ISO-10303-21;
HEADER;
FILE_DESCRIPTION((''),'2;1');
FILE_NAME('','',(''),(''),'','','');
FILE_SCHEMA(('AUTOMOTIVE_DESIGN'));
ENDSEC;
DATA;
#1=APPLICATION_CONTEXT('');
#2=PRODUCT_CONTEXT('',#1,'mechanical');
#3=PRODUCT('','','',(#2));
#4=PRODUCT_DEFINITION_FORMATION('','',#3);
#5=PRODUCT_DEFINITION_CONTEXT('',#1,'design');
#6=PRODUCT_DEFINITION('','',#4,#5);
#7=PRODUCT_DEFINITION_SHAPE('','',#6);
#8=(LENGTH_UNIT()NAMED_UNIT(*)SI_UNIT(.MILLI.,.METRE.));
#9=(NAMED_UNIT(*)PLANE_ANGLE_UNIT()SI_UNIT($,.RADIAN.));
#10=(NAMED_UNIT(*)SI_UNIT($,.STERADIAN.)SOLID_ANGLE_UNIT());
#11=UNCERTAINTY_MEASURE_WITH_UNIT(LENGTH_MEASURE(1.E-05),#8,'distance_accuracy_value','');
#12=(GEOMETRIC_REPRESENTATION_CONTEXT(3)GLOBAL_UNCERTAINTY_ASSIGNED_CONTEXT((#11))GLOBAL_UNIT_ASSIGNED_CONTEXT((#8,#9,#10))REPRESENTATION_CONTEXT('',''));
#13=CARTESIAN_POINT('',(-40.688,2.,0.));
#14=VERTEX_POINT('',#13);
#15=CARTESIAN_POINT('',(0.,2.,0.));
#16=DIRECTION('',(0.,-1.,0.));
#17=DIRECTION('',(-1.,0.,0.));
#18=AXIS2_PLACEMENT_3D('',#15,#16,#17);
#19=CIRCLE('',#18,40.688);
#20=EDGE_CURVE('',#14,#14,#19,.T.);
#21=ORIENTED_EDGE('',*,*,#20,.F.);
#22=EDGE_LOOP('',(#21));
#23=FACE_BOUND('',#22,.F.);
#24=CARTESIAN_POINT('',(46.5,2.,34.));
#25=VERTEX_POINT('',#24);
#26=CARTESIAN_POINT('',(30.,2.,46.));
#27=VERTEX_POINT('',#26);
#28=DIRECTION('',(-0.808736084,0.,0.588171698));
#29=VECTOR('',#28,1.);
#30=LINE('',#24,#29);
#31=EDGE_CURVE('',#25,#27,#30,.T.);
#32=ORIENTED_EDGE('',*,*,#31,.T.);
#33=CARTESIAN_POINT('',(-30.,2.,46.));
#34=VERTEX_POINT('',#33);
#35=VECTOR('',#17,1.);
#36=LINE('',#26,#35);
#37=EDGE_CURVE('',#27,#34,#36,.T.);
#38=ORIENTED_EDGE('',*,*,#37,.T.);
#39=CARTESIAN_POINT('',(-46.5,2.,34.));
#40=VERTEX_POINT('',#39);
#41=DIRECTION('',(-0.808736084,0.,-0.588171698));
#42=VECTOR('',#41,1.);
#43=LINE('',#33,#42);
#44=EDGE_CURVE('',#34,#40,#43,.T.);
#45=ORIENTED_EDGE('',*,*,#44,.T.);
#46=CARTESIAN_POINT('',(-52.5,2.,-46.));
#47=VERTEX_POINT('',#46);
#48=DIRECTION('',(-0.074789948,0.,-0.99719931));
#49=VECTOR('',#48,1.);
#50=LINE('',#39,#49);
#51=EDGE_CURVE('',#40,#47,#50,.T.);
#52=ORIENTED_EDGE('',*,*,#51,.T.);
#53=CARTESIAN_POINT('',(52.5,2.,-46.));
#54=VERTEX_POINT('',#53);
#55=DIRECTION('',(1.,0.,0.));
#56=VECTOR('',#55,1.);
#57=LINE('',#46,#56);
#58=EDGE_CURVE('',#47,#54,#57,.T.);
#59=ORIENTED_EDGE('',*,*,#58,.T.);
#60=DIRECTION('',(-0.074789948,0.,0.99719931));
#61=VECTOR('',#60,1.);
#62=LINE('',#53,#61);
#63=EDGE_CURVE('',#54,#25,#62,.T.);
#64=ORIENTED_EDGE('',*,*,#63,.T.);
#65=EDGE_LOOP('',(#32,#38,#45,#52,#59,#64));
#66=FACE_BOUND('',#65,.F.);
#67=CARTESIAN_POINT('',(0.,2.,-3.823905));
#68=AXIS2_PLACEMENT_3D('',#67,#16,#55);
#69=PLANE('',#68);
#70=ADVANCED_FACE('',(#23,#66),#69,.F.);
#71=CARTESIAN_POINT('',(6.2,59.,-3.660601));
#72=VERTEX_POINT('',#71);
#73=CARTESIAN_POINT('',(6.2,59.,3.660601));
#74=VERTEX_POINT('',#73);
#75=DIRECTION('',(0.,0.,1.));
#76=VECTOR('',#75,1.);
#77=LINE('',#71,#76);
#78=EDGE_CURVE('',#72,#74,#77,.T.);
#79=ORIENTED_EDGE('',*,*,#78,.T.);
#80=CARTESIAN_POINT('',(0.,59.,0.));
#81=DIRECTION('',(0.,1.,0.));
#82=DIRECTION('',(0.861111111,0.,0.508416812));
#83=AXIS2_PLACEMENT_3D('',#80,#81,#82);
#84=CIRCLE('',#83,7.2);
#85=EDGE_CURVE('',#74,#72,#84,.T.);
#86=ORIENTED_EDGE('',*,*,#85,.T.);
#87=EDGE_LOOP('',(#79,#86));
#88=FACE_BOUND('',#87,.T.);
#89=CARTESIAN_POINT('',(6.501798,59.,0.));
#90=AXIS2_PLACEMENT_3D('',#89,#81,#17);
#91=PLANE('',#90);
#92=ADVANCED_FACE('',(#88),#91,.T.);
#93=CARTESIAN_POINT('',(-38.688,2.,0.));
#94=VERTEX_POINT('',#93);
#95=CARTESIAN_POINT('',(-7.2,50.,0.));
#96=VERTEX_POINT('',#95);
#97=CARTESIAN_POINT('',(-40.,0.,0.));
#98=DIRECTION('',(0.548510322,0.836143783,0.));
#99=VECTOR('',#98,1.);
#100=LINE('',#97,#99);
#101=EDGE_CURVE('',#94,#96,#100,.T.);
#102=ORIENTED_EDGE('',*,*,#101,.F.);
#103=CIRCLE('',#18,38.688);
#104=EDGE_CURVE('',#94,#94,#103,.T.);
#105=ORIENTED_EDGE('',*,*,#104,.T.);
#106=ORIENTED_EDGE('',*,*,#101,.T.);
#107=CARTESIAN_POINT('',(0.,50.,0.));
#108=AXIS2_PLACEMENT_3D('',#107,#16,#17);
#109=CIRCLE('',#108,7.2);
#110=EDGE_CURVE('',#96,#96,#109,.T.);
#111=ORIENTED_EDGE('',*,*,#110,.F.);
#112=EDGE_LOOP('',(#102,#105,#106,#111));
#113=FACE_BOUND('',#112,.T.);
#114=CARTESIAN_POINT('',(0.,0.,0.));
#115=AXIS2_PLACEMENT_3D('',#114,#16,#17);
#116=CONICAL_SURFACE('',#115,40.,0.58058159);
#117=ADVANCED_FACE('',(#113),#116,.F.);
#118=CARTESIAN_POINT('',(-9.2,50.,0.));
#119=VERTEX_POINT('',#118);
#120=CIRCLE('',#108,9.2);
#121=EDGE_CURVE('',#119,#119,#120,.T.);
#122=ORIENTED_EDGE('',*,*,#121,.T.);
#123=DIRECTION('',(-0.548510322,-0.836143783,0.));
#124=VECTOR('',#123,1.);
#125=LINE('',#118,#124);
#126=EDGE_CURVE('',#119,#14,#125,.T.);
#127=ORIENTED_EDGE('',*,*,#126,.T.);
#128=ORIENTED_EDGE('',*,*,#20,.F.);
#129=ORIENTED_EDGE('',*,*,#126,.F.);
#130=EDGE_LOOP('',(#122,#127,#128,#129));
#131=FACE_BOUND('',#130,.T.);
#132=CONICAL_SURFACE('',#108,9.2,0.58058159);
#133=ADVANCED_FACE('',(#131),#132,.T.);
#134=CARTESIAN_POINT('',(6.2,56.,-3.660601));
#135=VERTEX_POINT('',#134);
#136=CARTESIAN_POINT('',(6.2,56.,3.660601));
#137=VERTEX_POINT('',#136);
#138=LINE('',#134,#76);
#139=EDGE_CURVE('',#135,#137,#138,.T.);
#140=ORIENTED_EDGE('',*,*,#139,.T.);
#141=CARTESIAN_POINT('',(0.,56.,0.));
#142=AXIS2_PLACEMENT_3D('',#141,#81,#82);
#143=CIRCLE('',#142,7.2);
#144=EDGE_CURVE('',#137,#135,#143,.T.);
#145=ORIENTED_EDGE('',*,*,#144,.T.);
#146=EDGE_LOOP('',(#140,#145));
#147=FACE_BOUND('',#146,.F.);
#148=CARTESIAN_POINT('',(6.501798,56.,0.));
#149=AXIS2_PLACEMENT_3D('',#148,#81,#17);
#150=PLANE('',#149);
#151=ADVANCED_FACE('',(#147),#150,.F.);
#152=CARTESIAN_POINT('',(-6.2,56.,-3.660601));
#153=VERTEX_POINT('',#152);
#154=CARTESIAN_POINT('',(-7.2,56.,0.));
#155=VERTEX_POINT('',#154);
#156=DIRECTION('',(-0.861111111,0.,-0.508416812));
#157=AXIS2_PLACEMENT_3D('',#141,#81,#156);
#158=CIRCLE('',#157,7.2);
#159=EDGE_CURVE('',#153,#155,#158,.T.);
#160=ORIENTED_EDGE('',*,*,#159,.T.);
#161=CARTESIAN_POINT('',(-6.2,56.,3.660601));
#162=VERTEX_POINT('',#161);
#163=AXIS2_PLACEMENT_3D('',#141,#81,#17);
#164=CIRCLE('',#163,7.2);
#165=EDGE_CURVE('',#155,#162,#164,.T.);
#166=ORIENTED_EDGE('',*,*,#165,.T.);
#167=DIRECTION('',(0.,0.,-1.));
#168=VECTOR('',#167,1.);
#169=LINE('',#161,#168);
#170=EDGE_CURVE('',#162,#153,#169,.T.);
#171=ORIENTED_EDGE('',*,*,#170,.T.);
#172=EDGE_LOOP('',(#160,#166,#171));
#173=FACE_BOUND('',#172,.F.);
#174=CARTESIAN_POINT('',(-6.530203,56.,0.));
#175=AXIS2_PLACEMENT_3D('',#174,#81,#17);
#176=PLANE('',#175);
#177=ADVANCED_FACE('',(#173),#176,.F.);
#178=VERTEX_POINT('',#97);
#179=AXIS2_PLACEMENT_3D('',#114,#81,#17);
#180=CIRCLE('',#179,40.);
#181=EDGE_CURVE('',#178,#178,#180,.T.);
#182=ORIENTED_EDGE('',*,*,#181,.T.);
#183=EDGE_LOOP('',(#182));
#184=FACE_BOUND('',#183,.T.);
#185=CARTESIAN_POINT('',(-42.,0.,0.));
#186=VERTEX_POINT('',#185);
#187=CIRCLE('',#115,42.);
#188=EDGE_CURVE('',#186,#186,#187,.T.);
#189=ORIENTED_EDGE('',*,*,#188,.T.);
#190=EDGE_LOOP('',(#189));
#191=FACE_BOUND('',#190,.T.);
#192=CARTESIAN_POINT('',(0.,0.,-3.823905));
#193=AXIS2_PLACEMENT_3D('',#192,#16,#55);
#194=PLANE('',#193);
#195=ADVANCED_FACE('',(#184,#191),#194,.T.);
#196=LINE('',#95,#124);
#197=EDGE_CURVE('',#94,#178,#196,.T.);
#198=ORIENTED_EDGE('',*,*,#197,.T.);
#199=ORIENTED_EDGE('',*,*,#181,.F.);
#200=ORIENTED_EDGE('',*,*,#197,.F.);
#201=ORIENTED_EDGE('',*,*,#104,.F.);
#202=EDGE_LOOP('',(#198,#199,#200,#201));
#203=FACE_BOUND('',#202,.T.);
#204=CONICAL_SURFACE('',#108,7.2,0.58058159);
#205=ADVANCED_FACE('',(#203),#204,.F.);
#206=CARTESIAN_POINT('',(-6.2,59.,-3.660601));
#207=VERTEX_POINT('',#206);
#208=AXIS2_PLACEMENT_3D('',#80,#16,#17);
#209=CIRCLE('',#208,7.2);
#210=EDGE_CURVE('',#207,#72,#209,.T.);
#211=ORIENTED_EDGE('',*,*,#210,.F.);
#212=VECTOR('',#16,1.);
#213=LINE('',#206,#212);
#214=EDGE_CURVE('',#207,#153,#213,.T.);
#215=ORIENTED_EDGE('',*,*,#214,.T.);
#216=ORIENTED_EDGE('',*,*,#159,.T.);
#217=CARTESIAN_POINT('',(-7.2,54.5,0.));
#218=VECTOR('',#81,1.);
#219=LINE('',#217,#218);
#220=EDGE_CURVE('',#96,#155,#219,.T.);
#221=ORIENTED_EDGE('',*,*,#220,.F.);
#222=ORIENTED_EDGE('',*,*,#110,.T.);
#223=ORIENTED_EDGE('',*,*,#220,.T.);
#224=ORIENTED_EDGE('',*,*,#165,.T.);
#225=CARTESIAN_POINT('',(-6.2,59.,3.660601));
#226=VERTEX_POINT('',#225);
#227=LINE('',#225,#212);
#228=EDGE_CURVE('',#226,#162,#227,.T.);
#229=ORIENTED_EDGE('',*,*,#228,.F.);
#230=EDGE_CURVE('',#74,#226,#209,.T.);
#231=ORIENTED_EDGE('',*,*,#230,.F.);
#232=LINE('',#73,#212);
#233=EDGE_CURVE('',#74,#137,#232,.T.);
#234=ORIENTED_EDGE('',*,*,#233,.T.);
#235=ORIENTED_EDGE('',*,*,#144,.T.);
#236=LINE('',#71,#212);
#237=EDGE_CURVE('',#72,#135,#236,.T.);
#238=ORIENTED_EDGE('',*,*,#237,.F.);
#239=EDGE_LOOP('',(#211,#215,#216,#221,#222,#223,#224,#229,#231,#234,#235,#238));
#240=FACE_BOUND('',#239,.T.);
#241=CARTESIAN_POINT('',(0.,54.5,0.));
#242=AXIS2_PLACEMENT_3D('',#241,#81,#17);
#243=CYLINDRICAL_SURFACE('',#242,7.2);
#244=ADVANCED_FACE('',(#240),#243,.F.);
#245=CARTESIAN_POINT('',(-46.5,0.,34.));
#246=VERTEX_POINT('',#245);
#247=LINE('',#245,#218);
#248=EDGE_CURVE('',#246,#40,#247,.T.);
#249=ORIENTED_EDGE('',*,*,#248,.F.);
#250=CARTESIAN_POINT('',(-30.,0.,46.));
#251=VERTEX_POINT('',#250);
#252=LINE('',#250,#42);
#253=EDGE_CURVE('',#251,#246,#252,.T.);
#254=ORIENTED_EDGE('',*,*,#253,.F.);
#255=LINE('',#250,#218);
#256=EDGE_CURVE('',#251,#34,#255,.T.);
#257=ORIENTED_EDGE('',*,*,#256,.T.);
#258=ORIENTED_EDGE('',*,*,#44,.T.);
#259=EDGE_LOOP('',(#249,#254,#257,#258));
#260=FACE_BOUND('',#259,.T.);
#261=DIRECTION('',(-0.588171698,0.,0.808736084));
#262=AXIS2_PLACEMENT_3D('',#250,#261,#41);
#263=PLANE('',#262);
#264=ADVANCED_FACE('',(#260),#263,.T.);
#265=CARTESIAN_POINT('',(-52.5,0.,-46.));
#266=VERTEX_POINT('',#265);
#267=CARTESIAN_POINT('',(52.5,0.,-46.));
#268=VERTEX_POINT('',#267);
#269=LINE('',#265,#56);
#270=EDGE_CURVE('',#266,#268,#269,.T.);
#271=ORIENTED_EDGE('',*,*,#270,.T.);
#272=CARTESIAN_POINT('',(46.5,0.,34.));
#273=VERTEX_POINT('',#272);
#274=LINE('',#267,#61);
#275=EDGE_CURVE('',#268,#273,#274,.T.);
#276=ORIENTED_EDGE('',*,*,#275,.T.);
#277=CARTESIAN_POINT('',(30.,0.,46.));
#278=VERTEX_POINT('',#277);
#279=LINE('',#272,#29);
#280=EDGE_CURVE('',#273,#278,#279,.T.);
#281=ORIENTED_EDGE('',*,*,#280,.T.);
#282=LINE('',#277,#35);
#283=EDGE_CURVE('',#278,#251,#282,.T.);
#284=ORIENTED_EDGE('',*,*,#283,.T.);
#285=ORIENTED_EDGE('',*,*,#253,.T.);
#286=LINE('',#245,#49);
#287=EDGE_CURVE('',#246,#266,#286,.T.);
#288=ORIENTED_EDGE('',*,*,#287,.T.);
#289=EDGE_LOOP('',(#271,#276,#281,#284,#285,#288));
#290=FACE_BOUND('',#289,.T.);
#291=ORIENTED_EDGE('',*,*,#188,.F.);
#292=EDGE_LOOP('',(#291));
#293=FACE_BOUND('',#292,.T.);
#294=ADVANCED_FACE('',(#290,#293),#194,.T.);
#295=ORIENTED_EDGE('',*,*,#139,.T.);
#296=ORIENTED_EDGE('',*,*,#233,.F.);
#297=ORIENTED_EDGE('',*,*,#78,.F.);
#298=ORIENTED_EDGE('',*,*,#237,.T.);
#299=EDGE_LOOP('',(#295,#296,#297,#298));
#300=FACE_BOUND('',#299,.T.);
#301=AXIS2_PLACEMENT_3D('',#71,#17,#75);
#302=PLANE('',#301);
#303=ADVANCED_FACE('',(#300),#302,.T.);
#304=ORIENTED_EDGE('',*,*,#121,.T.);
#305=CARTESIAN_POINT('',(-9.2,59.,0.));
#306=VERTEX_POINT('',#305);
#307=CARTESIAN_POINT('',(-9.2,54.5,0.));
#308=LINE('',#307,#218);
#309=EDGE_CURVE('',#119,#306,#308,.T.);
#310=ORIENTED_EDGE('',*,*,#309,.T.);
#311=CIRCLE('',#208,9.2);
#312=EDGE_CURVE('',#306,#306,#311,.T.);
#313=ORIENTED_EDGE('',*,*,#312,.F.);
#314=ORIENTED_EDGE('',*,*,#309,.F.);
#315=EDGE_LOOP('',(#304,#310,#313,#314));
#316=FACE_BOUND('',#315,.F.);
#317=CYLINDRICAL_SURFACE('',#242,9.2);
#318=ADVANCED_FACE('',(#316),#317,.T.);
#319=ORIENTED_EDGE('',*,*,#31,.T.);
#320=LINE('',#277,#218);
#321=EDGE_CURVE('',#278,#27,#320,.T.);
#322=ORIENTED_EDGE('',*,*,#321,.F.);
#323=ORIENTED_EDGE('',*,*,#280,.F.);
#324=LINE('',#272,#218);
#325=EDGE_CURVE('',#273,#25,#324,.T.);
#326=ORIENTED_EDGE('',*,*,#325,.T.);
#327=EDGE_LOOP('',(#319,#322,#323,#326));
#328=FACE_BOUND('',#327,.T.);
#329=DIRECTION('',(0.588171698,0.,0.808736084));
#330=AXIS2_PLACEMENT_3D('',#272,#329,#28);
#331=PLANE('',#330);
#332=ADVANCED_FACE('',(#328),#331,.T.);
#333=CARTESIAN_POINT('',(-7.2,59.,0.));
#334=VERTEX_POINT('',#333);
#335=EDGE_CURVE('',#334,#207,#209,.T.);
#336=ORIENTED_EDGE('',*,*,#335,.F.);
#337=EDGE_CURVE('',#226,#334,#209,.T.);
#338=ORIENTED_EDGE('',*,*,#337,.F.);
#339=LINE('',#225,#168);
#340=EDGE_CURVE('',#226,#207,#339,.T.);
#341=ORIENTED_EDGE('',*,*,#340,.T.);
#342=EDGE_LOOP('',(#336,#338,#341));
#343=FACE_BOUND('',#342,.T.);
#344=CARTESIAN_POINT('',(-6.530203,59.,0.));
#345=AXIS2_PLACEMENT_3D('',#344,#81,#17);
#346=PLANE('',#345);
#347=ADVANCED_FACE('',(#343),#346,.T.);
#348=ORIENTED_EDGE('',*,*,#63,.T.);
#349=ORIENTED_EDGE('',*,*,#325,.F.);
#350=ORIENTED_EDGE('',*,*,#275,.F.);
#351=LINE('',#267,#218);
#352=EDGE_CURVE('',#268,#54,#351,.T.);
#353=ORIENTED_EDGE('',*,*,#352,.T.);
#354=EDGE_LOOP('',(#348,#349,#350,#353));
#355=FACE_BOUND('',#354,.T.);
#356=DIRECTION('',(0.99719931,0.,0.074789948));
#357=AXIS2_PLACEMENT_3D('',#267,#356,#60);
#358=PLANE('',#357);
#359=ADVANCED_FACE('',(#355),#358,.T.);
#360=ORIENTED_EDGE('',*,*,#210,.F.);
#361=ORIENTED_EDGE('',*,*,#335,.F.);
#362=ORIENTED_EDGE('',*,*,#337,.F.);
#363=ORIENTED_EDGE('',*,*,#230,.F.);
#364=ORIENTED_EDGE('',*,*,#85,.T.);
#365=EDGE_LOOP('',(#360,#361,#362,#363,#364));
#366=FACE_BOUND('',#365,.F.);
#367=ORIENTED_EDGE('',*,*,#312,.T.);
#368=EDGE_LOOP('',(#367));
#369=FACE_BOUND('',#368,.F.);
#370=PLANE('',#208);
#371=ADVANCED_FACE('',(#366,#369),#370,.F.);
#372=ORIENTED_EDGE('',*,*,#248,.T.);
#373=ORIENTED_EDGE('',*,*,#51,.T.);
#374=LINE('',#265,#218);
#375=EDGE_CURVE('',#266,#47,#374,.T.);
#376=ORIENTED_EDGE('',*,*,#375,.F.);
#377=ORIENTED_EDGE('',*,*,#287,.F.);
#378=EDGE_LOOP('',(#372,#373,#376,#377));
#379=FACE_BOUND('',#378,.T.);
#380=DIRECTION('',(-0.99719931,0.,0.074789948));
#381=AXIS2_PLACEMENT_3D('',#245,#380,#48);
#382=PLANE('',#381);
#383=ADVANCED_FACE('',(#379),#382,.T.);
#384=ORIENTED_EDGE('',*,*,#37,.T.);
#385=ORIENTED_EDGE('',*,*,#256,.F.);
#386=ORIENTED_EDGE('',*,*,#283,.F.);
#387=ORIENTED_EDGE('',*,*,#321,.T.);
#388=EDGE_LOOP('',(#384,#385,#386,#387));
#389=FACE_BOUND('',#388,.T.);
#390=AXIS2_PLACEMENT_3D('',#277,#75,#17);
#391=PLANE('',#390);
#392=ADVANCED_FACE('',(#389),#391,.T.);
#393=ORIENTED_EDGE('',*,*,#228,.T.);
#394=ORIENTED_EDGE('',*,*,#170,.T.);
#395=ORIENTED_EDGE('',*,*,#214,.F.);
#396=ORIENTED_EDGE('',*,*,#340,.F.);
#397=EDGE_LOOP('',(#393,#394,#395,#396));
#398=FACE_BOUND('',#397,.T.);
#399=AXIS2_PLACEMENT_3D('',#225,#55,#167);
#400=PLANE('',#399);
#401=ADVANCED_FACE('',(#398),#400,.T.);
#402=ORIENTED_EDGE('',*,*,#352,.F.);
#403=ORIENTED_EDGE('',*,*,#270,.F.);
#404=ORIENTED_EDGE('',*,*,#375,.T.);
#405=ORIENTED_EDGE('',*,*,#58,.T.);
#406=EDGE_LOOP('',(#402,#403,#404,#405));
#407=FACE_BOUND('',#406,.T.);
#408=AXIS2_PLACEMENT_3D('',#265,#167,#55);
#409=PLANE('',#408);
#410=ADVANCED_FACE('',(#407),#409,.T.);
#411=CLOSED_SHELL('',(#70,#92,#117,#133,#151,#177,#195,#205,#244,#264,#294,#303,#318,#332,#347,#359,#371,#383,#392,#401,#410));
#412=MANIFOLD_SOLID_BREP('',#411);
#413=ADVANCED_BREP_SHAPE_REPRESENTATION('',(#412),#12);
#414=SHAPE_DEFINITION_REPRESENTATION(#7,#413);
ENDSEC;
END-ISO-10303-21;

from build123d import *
from build123d import SkipClean  # not in build123d's __all__

# Parameters (mm, degrees)
F2_DEPTH = 2
F1_W     = 2
F1_H     = 9
F6_DEPTH = 3


with BuildPart() as f2:
    # F0 (on Front) → F2 (new body)
    with BuildSketch(Plane.XZ):
        Polygon((-52.5, -46), (52.5, -46), (46.5, 34), (30, 46), (-30, 46), (-46.5, 34), align=None)
    extrude(amount=-F2_DEPTH)

    # F1 (on Top) → F3 (revolve, cut)
    with BuildSketch(Plane.XY):
        Polygon((-20, 0), (0, 0), (0, 50), (-7.2, 50), (-40, 0), (-22, 0), align=None)
    revolve(axis=Axis((0, 25, 0), (0, 1, 0)), mode=Mode.SUBTRACT)

    # F1 (on Top) → F4 (revolve)
    with BuildSketch(Plane.XY):
        Polygon((-40, 0), (-7.2, 50), (-9.2, 50), (-42, 0), align=None)
        with Locations((-8.2, 54.5)):
            Rectangle(F1_W, F1_H)
    with SkipClean():  # cleaning this boolean's faces spoils the solid; the shape is the same uncleaned
        revolve(axis=Axis((0, 2, 0), (0, -1, 0)))

    # F5 (on face) → F6 (join)
    with BuildSketch(Plane(origin=(0, 59, 0), x_dir=(-1, 0, 0), z_dir=(0, 1, 0))):
        with BuildLine():
            Line((-6.2, -3.6606010435), (-6.2, 0))
            Line((-6.2, 0), (-6.2, 3.6606010435))
            ThreePointArc((-6.2, 3.6606010435), (-7.2, 0), (-6.2, -3.6606010435))
        make_face()
        with BuildLine():
            ThreePointArc((7.2, 0), (6.9455021417, 1.8973665961), (6.2, 3.6606010435))
            Line((6.2, 3.6606010435), (6.2, -3.6606010435))
            ThreePointArc((6.2, -3.6606010435), (6.9455021417, -1.8973665961), (7.2, 0))
        make_face()
    with SkipClean():  # cleaning this boolean's faces spoils the solid; the shape is the same uncleaned
        extrude(amount=-F6_DEPTH)


solid = f2.part
